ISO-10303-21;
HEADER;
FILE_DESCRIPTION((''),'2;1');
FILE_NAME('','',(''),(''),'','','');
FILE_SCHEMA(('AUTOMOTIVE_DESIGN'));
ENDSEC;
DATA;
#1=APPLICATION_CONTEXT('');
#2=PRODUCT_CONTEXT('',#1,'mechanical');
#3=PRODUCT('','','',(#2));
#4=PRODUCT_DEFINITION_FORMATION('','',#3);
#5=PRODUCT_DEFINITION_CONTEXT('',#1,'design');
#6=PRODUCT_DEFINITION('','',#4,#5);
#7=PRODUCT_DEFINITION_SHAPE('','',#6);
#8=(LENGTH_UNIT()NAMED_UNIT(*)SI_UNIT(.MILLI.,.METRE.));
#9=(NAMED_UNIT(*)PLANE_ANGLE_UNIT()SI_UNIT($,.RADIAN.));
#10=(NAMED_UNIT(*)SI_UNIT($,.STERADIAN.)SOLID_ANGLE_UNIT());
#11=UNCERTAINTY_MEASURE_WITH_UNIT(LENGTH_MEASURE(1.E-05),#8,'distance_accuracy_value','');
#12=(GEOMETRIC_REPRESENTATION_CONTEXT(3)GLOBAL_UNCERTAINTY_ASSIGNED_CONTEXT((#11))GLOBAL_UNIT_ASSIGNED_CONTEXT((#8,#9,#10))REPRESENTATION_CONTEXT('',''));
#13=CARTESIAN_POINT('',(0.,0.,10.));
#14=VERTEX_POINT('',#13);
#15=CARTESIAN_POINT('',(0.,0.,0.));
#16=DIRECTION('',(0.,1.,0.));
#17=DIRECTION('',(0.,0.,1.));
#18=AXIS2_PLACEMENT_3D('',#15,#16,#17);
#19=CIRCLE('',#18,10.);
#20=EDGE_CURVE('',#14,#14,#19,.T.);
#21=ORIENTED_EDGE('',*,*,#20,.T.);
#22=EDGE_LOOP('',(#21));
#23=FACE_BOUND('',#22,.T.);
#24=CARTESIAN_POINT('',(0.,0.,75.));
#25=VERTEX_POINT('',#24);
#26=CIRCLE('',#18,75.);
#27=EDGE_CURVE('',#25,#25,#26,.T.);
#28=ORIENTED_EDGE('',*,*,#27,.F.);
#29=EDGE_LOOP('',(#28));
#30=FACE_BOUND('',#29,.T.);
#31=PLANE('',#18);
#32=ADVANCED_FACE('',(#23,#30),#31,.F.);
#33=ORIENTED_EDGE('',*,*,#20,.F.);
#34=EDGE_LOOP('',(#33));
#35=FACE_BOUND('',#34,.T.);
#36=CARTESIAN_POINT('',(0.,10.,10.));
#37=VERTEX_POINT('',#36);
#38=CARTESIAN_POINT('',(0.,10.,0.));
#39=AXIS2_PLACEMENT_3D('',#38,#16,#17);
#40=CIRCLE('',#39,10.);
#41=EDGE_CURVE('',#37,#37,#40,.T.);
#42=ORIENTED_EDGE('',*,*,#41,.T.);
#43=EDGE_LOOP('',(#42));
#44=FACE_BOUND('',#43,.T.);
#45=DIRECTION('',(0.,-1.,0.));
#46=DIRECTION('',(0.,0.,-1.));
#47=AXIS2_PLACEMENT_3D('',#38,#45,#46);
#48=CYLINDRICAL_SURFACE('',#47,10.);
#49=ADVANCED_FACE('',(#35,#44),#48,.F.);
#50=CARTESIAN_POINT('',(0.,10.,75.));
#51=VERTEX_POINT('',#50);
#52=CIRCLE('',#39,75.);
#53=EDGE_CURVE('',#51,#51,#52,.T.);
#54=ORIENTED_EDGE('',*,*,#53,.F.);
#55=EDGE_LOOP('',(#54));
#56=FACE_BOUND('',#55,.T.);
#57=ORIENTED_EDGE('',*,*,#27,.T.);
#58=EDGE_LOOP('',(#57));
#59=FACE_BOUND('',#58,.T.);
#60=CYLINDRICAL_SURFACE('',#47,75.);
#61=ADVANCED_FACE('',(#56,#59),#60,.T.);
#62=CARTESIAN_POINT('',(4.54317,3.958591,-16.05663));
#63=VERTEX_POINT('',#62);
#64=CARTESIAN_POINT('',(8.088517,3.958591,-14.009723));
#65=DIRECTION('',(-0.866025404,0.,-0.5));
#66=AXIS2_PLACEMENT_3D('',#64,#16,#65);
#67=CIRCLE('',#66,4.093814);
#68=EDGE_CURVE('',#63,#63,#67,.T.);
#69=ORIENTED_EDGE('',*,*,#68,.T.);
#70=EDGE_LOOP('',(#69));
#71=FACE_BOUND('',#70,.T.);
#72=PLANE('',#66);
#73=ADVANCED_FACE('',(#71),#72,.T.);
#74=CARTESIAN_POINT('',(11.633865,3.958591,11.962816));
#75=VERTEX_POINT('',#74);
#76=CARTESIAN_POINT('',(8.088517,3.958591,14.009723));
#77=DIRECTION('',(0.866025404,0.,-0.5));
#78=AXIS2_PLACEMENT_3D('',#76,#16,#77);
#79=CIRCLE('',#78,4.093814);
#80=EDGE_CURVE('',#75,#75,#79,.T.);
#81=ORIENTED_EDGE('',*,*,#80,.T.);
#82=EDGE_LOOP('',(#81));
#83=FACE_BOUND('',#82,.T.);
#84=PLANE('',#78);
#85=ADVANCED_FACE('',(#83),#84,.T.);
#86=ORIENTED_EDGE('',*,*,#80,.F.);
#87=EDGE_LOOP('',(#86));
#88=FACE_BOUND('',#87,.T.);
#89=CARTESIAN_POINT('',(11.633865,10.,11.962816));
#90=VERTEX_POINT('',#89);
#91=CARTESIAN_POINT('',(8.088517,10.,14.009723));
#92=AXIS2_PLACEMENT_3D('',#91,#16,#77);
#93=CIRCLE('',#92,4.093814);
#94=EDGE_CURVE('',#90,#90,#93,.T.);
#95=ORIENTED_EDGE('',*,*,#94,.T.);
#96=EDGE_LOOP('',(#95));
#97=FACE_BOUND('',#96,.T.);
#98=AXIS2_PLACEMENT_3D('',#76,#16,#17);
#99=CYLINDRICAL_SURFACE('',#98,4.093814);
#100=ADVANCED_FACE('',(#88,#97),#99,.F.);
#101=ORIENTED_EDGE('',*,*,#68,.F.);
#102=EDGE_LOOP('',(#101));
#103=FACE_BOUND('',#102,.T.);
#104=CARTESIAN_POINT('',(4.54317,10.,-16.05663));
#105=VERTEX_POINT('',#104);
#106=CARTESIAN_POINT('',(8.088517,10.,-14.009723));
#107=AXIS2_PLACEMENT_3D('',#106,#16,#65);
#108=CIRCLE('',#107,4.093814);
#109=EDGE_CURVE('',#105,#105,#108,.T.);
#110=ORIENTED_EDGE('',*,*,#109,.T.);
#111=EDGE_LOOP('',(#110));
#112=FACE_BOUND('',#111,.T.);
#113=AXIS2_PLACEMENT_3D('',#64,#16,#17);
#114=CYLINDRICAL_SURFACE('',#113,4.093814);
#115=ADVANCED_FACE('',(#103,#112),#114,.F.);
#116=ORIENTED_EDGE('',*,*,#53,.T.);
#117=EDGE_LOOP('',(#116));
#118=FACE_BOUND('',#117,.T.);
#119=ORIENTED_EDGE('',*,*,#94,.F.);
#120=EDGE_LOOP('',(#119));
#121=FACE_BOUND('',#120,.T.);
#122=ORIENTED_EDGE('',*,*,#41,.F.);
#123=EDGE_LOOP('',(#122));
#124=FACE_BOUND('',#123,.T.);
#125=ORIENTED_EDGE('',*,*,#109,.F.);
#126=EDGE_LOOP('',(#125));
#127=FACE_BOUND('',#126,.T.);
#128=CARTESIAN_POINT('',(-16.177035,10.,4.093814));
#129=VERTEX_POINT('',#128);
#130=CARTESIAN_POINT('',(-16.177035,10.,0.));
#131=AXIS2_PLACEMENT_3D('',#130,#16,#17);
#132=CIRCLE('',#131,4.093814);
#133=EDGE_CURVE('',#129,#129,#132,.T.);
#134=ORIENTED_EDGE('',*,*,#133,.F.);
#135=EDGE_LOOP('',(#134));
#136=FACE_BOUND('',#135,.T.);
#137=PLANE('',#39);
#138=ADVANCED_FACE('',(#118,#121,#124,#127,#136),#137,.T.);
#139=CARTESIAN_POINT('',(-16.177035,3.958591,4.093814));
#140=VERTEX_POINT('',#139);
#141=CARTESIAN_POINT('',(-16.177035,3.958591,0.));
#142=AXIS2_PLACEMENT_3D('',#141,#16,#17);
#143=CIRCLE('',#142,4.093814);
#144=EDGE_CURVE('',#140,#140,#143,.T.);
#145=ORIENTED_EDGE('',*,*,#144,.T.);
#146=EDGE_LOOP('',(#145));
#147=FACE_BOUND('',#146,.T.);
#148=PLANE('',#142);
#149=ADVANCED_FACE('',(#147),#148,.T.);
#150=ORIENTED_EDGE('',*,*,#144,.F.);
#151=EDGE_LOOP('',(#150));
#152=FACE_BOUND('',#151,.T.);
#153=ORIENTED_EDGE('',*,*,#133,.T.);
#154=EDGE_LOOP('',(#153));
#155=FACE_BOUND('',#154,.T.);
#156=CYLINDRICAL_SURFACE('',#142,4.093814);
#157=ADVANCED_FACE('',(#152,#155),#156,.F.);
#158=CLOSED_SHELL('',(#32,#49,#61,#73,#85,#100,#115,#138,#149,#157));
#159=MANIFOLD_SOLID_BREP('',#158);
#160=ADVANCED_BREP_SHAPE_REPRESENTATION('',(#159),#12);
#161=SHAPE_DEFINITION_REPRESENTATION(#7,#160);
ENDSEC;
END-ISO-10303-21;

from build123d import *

# Parameters (mm, degrees)
SKETCH1_R           = 75
BOSS_EXTRUDE1_DEPTH = 10
SKETCH2_R           = 10
CUT_EXTRUDE1_DEPTH  = 107.536378763
SKETCH3_R           = 4.093814482
CUT_EXTRUDE2_DEPTH  = 6.041409129
CIRPATTERN1_COUNT   = 3


with BuildPart() as part:
    # Sketch1 → Boss-Extrude1 (new body)
    with BuildSketch(Plane(origin=(0, 0, 0), x_dir=(1, 0, 0), z_dir=(0, 1, 0))):
        Circle(SKETCH1_R)
    extrude(amount=BOSS_EXTRUDE1_DEPTH)

    # Sketch2 → Cut-Extrude1 (cut, through all)
    with BuildSketch(Plane(origin=(0, 0, 0), x_dir=(1, 0, 0), z_dir=(0, 1, 0))):
        Circle(SKETCH2_R)
    extrude(amount=CUT_EXTRUDE1_DEPTH, mode=Mode.SUBTRACT)

    # Sketch3 → Cut-Extrude2 (cut)
    with BuildSketch(Plane(origin=(0, 10, 0), x_dir=(1, 0, 0), z_dir=(0, 1, 0))):
        with Locations((-16.177034973, 0)):
            Circle(SKETCH3_R)
    cut_extrude2 = extrude(amount=-CUT_EXTRUDE2_DEPTH, mode=Mode.SUBTRACT)

    # CirPattern1: Cut-Extrude2 ×3 about axis
    cirpattern1_axis = Axis((0, 0, 0), (0, 1, 0))
    for i in range(1, CIRPATTERN1_COUNT):
        add(cut_extrude2.rotate(cirpattern1_axis, i * 360 / CIRPATTERN1_COUNT), mode=Mode.SUBTRACT)


solid = part.part
